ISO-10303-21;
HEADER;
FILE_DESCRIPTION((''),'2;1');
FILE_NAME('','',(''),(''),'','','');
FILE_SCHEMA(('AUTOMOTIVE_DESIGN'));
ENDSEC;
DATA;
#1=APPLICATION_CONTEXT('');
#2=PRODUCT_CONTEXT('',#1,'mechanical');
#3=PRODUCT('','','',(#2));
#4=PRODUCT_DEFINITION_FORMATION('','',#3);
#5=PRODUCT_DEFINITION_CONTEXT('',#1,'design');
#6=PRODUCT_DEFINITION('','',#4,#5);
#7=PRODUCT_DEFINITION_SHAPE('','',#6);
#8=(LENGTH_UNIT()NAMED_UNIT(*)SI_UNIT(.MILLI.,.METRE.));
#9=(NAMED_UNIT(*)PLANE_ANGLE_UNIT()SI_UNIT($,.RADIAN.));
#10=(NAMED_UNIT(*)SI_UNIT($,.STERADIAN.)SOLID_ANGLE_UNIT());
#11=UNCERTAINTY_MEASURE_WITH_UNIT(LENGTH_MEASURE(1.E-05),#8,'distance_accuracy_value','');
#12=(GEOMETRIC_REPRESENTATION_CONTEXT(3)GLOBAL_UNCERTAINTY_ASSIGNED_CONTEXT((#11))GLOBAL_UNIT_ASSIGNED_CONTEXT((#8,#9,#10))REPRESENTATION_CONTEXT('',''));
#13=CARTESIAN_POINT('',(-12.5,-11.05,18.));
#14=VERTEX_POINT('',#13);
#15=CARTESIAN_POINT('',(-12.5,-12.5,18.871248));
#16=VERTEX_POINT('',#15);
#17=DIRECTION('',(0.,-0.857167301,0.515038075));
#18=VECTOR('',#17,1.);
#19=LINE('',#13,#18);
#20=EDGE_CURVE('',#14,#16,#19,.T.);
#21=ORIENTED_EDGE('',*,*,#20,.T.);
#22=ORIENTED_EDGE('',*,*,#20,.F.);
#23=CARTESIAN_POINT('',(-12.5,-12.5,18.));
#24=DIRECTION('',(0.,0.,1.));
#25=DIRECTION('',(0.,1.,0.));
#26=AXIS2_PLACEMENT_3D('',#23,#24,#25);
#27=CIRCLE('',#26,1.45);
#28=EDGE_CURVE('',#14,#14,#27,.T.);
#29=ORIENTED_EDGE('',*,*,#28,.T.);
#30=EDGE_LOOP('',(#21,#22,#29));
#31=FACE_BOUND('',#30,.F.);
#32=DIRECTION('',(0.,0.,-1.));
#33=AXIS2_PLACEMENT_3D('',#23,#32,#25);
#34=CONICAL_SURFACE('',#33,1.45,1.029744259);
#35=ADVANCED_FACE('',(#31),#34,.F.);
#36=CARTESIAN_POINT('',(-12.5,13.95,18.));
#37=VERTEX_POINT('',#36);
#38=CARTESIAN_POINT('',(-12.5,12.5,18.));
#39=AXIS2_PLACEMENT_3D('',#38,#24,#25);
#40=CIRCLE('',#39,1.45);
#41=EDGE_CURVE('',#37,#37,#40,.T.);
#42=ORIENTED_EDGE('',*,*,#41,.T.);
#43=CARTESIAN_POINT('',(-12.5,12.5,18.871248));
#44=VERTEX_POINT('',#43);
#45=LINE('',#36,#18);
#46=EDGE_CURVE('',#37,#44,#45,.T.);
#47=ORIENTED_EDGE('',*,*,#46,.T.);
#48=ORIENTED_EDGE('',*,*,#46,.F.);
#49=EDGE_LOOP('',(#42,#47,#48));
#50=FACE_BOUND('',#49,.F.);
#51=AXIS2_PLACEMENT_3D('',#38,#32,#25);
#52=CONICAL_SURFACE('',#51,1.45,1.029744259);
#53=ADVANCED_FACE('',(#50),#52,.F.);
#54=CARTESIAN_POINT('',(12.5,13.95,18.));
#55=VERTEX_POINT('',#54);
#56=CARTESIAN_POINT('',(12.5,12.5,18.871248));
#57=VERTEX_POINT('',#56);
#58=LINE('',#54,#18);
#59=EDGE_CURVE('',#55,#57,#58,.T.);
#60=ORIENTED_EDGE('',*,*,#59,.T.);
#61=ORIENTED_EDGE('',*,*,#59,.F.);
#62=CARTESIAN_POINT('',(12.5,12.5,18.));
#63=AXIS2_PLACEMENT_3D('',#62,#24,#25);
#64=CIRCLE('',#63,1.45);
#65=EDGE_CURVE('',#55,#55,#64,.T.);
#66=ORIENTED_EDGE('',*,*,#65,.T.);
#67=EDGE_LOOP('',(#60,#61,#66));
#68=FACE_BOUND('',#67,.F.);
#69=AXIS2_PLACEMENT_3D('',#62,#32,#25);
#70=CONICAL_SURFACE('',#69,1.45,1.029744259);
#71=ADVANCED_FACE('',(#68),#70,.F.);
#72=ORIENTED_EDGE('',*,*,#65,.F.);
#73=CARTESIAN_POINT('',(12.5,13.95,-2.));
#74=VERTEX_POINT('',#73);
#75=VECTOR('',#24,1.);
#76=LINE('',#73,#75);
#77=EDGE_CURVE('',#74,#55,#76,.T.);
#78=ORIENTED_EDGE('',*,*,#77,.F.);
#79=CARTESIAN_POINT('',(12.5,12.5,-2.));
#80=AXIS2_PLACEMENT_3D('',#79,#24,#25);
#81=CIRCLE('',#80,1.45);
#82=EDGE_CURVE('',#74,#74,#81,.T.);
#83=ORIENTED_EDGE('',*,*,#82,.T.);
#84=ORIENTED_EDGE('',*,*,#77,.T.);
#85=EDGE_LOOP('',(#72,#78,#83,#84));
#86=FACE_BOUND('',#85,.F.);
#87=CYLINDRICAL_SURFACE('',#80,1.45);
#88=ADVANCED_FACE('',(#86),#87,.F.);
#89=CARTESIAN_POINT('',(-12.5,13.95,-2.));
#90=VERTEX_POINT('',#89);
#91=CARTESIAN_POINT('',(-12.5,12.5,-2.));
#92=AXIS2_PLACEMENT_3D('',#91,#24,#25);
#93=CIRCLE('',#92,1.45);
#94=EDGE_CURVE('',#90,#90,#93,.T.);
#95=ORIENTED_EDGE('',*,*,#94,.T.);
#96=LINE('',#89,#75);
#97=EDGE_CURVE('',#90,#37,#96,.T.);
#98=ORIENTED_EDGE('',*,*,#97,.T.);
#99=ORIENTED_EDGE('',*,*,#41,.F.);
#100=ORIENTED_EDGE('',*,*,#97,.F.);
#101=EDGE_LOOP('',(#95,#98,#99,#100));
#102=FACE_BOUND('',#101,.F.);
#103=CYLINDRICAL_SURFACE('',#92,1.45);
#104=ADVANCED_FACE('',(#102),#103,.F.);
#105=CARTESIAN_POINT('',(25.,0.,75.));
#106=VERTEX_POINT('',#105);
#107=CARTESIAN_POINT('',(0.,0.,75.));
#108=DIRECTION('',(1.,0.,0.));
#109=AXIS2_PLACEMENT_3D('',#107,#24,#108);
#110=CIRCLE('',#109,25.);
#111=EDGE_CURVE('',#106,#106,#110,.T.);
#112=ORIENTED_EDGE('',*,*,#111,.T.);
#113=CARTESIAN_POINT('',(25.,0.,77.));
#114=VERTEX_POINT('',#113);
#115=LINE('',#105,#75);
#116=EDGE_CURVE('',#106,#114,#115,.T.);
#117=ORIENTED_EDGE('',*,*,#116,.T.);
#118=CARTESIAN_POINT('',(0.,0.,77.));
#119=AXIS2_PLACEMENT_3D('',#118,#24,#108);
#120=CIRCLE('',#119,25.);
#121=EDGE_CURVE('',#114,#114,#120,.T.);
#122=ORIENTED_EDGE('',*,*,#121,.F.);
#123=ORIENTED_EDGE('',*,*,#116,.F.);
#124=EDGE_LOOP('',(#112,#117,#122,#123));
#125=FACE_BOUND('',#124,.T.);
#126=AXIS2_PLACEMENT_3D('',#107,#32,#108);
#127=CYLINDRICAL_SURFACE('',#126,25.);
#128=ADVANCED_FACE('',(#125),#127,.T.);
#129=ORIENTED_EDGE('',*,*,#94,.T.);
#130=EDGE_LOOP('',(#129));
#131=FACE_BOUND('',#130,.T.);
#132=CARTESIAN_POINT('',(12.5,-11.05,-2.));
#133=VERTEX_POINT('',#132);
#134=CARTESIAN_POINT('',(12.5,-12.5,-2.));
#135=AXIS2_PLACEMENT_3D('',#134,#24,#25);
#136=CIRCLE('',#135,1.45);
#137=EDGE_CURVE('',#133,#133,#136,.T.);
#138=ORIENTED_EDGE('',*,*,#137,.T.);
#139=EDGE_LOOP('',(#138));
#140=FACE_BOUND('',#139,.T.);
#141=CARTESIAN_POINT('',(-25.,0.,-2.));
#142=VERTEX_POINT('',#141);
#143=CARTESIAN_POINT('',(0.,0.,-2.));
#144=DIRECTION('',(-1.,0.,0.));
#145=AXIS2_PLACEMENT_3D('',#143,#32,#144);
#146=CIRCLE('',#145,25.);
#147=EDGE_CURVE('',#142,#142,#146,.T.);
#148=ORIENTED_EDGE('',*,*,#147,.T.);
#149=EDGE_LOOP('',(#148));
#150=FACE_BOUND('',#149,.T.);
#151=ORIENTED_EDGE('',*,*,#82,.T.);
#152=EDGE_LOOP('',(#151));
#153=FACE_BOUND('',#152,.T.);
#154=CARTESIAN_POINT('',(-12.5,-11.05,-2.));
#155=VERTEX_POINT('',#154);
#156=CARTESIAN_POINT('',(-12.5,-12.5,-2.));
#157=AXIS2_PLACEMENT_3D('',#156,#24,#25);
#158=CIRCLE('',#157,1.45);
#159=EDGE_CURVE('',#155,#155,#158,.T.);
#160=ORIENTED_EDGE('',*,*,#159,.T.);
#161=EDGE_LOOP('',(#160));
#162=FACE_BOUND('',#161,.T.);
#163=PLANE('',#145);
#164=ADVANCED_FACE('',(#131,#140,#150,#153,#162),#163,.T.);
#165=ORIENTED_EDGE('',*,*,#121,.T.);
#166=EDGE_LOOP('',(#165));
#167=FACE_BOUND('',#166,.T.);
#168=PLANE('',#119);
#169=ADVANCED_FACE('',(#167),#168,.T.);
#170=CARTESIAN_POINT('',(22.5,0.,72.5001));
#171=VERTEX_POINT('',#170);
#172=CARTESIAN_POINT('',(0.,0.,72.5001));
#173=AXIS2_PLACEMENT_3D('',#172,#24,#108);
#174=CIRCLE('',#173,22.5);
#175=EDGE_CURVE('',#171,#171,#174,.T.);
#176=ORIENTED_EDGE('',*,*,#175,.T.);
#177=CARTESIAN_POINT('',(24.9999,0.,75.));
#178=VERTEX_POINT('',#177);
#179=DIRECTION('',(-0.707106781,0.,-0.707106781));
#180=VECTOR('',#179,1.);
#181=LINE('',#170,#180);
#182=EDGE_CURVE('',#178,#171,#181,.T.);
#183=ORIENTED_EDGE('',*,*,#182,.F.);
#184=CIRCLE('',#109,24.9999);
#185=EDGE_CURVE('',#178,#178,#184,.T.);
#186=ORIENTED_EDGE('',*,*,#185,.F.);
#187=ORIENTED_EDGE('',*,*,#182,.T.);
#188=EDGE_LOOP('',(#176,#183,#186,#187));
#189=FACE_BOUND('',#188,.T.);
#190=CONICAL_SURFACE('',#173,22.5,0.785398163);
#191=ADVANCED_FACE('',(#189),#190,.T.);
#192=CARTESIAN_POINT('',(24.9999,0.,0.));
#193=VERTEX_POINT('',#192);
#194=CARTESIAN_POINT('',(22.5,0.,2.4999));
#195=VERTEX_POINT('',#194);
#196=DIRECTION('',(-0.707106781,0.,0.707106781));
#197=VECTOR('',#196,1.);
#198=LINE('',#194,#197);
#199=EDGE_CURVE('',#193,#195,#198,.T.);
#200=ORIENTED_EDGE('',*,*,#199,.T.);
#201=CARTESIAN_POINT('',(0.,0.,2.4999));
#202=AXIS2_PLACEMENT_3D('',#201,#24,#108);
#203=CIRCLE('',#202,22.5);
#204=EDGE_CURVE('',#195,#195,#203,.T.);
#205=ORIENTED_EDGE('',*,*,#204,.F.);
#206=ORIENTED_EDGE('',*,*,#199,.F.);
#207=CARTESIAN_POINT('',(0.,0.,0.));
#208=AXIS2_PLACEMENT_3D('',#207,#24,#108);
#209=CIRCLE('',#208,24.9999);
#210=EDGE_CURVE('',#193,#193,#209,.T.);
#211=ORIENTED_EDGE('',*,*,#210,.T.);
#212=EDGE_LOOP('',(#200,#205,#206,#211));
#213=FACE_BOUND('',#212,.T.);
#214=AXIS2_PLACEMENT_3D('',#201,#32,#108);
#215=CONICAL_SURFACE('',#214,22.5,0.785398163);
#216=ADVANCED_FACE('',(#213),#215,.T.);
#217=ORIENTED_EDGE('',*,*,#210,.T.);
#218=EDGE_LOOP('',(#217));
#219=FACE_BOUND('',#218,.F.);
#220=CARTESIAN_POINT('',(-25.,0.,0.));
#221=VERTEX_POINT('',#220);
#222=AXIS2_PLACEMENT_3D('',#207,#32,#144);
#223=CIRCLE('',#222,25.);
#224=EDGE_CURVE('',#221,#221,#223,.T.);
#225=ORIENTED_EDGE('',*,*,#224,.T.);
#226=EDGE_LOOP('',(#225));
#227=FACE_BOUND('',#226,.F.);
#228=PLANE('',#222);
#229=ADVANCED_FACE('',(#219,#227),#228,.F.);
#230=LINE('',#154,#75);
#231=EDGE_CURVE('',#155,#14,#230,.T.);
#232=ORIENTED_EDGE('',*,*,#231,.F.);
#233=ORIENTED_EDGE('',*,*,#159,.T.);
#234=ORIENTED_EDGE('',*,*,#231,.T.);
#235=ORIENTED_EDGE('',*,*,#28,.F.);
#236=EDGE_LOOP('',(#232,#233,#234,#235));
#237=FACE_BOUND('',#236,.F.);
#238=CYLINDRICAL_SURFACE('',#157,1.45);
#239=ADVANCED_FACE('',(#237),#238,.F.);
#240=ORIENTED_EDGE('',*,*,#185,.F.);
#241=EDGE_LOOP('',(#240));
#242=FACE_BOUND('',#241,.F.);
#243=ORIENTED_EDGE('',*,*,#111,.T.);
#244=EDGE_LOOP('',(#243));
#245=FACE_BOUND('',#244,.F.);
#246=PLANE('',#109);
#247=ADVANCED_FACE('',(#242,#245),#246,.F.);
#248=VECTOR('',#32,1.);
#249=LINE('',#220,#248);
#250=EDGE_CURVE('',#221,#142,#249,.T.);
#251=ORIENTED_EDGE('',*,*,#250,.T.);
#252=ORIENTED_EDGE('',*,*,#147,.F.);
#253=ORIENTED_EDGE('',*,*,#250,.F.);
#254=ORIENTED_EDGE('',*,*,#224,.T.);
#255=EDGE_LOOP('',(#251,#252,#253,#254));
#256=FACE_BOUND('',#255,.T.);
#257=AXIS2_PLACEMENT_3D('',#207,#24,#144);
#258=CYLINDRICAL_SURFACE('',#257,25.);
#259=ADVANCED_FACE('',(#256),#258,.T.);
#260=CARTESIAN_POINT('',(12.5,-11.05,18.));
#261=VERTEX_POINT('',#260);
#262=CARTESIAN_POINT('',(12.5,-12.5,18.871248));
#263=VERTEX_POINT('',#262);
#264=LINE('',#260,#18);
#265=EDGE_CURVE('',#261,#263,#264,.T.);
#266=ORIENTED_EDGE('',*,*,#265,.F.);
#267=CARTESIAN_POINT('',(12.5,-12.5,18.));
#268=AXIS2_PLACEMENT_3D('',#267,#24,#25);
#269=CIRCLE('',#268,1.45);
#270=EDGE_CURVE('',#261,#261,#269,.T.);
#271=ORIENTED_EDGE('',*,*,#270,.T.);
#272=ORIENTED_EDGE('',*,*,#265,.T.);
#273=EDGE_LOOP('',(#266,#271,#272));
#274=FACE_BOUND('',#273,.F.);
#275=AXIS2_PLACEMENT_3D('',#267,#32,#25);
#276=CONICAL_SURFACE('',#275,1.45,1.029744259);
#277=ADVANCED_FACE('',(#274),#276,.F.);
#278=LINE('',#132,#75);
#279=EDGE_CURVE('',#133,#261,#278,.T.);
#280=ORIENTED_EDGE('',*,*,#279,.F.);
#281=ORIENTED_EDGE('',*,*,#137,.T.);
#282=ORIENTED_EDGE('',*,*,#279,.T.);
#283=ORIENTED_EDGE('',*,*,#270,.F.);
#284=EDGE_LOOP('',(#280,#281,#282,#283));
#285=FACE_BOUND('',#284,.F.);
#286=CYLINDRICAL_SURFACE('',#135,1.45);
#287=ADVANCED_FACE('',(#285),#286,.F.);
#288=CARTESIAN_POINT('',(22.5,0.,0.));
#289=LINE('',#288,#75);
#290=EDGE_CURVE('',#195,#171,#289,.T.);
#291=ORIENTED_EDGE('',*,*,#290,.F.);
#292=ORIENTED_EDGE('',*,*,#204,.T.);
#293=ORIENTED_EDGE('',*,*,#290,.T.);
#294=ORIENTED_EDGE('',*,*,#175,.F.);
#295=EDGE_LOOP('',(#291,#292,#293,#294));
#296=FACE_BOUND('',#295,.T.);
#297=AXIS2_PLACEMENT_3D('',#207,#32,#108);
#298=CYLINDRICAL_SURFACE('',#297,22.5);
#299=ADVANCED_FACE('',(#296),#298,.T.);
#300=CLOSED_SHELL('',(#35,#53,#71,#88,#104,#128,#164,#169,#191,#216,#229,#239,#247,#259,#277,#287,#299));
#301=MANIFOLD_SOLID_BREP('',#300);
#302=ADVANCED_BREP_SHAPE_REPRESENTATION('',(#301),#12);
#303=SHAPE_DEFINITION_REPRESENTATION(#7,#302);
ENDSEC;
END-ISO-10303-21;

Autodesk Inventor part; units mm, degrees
ref_plane "YZ Plane" through (0, 0, 0) normal (1, 0, 0) x (0, 1, 0)
ref_plane "XZ Plane" through (0, 0, 0) normal (0, 1, 0) x (-1, 0, 0)
ref_plane "XY Plane" through (0, 0, 0) normal (0, 0, 1) x (1, 0, 0)
sketch "Sketch1" plane through (0, 0, 0) normal (0, 0, 1) x (1, 0, 0)
  circle A0 centre (0, 0) radius 22.5
  point P0 (-12.5, 12.5)
  point P1 (12.5, 12.5)
  point P2 (12.5, -12.5)
  point P3 (-12.5, -12.5)
  dimension "d0" = 45
  dimension "d1" = 25
  dimension "d2" = 25
  dimension "d3" = 12.5
  dimension "d4" = 12.5
extrude "Extrusion1" add sketch "Sketch1" along normal blind 75
sketch "Sketch2" plane through (0, 0, 75) normal (0, 0, 1) x (1, 0, 0)
  circle A0 centre (0, 0) radius 22.5 projected
  circle A1 centre (0, 0) radius 25
  dimension "d7" = 2.5
extrude "Extrusion2" add sketch "Sketch2" along normal blind 2 contours A0 | A1
chamfer "Chamfer1" distance 2.5 angle 45 1 edges at (-22.5, 0, 75)
sketch "Sketch3" plane through (0, 0, 0) normal (0, 0, -1) x (-1, 0, 0)
  circle A0 centre (0, 0) radius 25 projected
extrude "Extrusion3" add sketch "Sketch3" along normal blind 2
chamfer "Chamfer2" distance 2.5 angle 45 1 edges at (-22.5, 0, 0)
sketch "Sketch4" plane through (0, 0, -2) normal (0, 0, -1) x (-1, 0, 0)
  circle A0 centre (0, 0) radius 25 projected
  point P0 (-12.5, 12.5)
  point P1 (12.5, 12.5)
  point P2 (12.5, -12.5)
  point P3 (-12.5, -12.5)
  dimension "d18" = 12.5
  dimension "d19" = 12.5
  dimension "d20" = 12.5
  dimension "d21" = 12.5
hole "Hole1" at (12.5, 12.5, -2) at (-12.5, 12.5, -2) at (-12.5, -12.5, -2) at (12.5, -12.5, -2) direction (0, 0, 1) diameter 2.9 depth 20 tip angle 118
equation "\"d2\" = d1"
equation "\"d3\" = 0.5 * d1"
equation "\"d4\" = d3"
equation "\"d19\" = d18"
equation "\"d20\" = d18"
equation "\"d21\" = d20"
properties part number "Filament Spool Holder" material "ABS Plastic"
